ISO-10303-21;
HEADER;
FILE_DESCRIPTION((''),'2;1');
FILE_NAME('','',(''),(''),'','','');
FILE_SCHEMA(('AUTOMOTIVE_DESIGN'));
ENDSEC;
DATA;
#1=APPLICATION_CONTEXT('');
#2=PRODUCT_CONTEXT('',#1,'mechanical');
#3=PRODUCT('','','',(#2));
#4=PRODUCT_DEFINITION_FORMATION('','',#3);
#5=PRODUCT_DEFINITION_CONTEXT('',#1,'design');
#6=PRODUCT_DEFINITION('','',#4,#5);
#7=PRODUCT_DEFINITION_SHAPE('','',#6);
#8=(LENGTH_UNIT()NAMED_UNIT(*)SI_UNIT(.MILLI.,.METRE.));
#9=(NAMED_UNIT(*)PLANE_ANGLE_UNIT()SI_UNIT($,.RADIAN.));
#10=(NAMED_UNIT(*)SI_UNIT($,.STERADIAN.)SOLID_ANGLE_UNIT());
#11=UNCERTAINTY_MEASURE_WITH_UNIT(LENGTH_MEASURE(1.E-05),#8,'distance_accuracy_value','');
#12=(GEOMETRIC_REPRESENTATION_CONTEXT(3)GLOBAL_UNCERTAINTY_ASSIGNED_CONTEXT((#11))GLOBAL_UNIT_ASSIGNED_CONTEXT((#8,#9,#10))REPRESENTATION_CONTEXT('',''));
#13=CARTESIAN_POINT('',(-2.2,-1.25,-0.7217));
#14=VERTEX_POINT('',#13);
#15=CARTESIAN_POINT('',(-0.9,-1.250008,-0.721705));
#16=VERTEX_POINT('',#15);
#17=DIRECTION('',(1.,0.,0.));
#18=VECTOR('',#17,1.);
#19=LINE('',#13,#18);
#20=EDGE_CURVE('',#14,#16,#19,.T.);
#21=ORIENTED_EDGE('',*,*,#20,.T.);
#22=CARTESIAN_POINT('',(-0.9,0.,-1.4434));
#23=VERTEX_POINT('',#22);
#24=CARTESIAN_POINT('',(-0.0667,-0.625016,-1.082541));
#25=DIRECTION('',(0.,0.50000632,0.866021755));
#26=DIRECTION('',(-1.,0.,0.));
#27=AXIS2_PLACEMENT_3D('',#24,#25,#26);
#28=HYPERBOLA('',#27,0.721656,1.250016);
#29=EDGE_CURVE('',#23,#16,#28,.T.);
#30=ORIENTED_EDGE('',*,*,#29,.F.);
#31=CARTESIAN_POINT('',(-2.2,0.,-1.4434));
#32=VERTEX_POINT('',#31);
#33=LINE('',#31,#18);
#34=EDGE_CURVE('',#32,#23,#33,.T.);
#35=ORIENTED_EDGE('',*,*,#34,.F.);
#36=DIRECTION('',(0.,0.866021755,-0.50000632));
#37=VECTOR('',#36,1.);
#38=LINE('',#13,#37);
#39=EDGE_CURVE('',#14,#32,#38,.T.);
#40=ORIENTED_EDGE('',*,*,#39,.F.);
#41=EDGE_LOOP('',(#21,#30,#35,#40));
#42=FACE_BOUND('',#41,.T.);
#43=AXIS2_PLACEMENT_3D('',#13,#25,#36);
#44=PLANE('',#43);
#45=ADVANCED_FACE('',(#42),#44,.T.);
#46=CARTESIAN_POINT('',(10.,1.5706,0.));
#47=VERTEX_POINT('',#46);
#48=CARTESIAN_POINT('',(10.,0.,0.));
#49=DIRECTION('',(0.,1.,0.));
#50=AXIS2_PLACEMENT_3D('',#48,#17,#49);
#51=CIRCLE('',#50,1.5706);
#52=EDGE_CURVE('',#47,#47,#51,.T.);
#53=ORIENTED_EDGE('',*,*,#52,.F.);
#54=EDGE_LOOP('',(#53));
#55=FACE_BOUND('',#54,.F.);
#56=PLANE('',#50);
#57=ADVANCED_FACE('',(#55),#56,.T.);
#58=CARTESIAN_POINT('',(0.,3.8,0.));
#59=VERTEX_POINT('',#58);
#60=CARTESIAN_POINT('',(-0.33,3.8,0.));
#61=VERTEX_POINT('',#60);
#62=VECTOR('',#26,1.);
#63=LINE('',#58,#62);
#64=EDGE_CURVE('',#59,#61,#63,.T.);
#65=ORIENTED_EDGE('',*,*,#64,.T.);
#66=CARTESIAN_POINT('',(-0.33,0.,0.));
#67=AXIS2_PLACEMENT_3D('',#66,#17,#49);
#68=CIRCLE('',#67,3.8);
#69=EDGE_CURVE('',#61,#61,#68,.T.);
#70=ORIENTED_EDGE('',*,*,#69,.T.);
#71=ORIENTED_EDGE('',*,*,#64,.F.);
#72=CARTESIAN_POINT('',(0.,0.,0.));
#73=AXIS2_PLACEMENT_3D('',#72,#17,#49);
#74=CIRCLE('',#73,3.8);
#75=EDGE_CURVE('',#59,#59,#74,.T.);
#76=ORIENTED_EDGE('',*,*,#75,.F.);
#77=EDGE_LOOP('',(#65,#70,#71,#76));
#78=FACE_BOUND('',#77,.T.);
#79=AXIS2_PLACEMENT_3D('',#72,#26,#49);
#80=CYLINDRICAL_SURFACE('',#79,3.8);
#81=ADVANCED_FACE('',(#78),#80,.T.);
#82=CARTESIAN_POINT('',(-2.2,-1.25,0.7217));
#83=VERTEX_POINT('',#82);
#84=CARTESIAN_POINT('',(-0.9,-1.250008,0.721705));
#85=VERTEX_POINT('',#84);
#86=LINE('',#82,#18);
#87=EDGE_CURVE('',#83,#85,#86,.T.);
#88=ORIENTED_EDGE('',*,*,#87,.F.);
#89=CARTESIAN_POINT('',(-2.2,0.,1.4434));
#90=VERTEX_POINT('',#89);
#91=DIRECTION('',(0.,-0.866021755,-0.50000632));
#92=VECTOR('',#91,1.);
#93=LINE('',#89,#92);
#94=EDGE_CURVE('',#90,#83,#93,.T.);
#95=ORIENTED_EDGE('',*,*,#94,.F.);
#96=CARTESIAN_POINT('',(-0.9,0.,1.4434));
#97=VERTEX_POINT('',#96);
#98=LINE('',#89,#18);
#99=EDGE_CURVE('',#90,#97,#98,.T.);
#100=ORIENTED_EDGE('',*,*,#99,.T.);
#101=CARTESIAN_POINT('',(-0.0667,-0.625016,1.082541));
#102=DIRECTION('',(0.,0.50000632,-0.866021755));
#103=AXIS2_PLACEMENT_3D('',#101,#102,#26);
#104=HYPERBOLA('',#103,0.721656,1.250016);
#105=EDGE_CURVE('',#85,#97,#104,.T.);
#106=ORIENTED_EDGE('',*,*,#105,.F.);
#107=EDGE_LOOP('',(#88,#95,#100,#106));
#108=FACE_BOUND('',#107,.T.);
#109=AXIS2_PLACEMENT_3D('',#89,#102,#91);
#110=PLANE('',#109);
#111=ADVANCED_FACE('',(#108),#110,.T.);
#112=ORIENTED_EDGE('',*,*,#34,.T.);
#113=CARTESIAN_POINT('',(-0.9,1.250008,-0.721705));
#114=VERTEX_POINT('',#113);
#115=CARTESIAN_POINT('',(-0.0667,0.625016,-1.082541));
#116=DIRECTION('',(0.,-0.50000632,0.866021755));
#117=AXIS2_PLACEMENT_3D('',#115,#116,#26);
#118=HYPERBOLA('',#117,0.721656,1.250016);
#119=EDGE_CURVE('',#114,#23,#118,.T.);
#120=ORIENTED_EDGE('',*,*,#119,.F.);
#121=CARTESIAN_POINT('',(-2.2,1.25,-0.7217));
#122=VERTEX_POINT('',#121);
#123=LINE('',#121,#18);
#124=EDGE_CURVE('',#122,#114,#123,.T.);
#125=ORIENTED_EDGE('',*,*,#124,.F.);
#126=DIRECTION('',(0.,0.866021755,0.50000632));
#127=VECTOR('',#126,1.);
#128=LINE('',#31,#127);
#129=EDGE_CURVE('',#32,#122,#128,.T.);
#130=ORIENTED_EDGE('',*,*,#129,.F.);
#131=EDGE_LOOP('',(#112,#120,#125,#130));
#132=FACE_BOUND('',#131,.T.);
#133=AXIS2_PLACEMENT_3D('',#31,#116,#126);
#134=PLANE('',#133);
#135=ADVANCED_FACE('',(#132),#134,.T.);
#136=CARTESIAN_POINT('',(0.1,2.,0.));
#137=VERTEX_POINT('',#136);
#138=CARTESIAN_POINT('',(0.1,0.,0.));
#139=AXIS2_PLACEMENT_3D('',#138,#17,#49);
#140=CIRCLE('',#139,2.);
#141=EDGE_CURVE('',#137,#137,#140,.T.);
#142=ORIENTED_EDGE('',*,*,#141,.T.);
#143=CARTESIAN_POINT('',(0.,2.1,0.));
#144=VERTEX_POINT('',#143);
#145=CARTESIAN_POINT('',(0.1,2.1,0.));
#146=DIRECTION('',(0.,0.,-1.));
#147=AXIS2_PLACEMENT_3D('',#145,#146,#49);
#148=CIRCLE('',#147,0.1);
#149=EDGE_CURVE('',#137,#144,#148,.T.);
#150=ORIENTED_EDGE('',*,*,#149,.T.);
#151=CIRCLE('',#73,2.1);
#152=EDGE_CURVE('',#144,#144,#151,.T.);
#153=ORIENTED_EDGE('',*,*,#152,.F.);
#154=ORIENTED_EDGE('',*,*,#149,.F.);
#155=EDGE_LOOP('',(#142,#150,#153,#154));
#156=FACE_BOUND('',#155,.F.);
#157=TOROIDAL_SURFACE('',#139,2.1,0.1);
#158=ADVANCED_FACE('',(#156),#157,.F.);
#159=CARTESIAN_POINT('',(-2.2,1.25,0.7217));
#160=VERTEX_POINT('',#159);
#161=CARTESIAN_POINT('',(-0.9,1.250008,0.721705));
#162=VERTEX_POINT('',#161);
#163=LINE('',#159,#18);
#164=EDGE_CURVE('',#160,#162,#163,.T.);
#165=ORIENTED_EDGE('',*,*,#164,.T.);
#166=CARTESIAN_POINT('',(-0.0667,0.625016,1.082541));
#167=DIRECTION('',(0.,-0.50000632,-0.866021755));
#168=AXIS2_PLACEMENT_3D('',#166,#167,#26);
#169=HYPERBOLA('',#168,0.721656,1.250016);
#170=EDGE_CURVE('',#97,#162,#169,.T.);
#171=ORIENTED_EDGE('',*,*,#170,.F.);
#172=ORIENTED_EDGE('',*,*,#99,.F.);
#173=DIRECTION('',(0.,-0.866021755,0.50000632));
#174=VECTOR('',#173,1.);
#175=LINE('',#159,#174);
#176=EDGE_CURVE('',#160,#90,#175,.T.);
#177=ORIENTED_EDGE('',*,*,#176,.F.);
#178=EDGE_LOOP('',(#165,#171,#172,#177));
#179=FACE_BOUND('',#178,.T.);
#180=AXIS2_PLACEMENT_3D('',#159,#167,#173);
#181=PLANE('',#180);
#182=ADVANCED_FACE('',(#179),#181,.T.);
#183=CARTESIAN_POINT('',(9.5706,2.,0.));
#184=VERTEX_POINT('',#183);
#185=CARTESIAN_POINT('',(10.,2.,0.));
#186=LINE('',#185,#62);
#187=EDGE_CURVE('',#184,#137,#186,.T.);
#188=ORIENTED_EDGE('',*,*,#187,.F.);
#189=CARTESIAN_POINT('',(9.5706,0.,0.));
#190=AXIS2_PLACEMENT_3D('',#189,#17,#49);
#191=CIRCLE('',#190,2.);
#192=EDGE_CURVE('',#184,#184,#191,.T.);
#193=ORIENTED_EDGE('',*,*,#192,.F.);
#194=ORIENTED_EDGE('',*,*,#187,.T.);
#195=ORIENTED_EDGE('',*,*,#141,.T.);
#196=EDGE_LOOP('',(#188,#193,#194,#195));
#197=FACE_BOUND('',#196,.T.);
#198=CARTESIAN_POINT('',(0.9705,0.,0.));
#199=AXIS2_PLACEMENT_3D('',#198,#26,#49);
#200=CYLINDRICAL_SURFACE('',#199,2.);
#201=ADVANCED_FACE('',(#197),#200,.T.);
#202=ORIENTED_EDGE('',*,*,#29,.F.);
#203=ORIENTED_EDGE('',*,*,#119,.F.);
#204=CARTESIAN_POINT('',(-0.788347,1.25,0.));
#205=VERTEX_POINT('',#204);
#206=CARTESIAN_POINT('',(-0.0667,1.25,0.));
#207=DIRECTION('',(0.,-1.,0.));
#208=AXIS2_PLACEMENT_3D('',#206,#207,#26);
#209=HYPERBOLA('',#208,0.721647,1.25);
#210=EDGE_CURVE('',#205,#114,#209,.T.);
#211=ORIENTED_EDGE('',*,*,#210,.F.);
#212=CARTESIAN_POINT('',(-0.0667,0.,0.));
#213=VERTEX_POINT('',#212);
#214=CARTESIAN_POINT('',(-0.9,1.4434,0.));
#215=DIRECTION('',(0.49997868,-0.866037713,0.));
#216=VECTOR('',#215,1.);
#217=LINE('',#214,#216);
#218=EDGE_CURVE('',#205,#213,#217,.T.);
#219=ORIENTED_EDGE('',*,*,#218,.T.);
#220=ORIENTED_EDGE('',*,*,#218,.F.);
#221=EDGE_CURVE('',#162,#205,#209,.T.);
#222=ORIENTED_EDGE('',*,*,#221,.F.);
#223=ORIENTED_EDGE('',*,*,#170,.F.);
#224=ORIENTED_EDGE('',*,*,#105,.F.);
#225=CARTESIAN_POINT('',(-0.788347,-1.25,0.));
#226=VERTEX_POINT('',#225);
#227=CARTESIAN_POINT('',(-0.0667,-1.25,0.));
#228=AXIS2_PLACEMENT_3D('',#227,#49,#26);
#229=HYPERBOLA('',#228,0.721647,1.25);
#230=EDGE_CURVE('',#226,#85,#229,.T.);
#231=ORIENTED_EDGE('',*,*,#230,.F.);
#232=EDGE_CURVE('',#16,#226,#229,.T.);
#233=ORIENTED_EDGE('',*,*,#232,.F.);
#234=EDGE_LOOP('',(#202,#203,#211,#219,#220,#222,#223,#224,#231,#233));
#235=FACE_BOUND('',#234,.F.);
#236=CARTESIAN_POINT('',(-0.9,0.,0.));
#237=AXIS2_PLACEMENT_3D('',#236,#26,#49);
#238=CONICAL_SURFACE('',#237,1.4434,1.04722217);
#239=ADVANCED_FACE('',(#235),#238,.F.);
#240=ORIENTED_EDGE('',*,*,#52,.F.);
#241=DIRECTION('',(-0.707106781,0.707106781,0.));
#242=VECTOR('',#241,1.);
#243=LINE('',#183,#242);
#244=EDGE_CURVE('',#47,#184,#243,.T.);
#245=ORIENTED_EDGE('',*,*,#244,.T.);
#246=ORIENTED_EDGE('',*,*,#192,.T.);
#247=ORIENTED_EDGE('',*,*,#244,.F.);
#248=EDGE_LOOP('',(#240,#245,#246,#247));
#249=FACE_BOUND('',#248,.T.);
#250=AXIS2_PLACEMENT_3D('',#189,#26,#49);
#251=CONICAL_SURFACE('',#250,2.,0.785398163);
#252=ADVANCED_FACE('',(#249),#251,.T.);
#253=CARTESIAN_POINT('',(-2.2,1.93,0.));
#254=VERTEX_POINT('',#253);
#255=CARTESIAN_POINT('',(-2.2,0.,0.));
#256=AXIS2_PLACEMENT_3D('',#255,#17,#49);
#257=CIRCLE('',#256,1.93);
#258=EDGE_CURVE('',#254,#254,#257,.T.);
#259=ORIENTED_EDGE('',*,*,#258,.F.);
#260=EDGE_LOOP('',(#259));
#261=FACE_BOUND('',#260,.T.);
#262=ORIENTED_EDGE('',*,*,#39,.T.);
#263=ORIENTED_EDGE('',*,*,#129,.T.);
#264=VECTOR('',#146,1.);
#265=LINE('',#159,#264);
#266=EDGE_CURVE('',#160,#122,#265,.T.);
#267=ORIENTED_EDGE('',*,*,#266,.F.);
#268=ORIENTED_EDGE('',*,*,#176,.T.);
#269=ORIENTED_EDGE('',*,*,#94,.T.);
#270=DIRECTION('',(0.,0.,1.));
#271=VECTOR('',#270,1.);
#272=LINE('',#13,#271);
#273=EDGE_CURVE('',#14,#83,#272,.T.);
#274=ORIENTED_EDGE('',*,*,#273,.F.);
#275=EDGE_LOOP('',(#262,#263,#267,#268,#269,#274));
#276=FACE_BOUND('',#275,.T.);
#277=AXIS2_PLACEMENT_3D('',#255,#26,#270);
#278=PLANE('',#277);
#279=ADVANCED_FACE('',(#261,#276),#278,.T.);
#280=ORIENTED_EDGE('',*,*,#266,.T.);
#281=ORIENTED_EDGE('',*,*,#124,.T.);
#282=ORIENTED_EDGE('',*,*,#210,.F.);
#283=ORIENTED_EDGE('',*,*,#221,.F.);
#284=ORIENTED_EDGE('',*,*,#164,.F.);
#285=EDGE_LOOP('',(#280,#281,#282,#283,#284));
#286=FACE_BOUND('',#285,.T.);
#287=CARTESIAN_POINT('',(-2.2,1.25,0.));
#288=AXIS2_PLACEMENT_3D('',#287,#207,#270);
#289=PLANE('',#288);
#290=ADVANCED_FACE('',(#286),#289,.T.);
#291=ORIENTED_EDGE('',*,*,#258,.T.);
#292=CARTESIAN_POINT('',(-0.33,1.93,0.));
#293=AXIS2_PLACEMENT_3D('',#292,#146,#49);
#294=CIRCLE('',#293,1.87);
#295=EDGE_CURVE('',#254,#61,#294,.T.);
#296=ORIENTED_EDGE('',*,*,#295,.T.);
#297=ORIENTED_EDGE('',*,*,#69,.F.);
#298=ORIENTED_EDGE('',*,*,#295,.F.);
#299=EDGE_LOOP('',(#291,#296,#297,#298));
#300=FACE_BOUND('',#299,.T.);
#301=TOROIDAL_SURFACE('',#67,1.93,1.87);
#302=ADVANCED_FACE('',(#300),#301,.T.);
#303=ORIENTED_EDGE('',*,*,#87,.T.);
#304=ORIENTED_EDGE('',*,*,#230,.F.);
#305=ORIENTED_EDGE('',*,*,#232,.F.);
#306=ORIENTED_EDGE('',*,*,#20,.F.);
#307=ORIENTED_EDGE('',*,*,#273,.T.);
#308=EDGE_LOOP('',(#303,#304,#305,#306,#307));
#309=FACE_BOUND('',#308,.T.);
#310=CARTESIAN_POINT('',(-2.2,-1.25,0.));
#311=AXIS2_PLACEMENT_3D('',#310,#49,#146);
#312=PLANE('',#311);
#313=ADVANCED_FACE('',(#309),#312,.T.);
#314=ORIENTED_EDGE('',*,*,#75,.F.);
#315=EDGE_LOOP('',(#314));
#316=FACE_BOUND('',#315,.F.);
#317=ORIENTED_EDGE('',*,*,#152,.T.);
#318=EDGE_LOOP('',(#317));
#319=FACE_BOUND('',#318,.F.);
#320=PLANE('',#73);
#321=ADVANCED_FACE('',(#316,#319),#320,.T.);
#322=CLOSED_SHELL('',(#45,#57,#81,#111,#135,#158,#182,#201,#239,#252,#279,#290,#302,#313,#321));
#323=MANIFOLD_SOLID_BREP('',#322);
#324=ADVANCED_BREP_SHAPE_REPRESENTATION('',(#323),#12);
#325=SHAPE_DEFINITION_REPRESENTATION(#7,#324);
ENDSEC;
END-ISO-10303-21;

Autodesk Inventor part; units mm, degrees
ref_plane "YZ Plane" through (0, 0, 0) normal (1, 0, 0) x (0, 1, 0)
ref_plane "XZ Plane" through (0, 0, 0) normal (0, 1, 0) x (-1, 0, 0)
sketch "Эскиз1" plane through (0, 0, 0) normal (0, 0, 1) x (1, 0, 0)
  line L0 (-0.0667, 0) -> (10, 0)
  line L1 (10, 0) -> (10, 2)
  line L2 (10, 2) -> (1.4, 2)
  line L3 (1.4, 2) -> (0.9705, 2)
  line L4 (0.9705, 2) -> (0, 2)
  line L5 (0, 2) -> (0, 3.8)
  line L6 (0, 3.8) -> (-2.2, 3.8)
  line L7 (-2.2, 3.8) -> (-2.2, 1.4434)
  line L8 (-2.2, 1.4434) -> (-0.9, 1.4434)
  line L9 (-0.9, 1.4434) -> (-0.0667, 0)
  line L10 (-4.64, 0) -> (12.44, 0) projected
  line L11 (0, -0.76) -> (0, 4.56) projected
  line L12 (1.4, 2) -> (0, 2) construction
  dimension "d1" = 8.6
  dimension "d2" = 0.4295
  dimension "d3" = 2.2
  dimension "d4" = 1.3
  dimension "d5" = 60
  dimension "d6" = 4
  dimension "d7" = 4
  dimension "d8" = 2.8868
  dimension "d9" = 7.6
  dimension "d26" = 10
revolve "Базовый элемент" add sketch "Эскиз1" angle 360 about axis through (-0.0667, 0, 0) along (1, 0, 0)
sketch "Эскиз2" plane through (-2.2, 0, 0) normal (-1, 0, 0) x (0, 0, 1)
  circle A0 centre (0, 0) radius 1.4434 projected
  line L0 (0, -5.32) -> (0, 5.32) projected
  line L1 (-5.32, 0) -> (5.32, 0) projected
  line L2 (1.4434, 0) -> (0.7217, -1.25)
  line L3 (0.7217, -1.25) -> (-0.7217, -1.25)
  line L4 (-0.7217, -1.25) -> (-1.4434, 0)
  line L5 (-1.4434, 0) -> (-0.7217, 1.25)
  line L6 (-0.7217, 1.25) -> (0.7217, 1.25)
  line L7 (0.7217, 1.25) -> (1.4434, 0)
extrude "Паз" add sketch "Эскиз2" against normal up to next contours L7 A0 | A0 L2 | L6 L0 A0 | A0 L0 L3 | L0 L6 A0 | A0 L3 L0 | L4 A0 | A0 L5
fillet "Сопряжение1" radius 1.87 1 edges at (-2.2, -3.8, 0)
thread "Резьба" size "M4x0.7" class "6g" standard "ISO Metric profile" length 8.6
chamfer "Фаска1" distance 0.4294 distance2 0.4294 1 edges at (10, -2, 0) measured on face at (10, 0.556, 0.0273)
ref_plane "Work Plane1" through (29, 0, 0) normal (0, -1, 0) x (1, 0, 0)
fillet "Fillet2" radius 0.1 1 edges at (0, -2, 0)
equation "\"d1\" = GEL"
equation "\"d3\" = KOH"
equation "\"d4\" = INTI"
equation "\"d6\" = GD"
equation "\"d7\" = BDM"
equation "\"d8\" = 1.1547 * SW"
equation "\"d9\" = KOD"
equation "\"d26\" = NLG"
equation "\"d30\" = R"
equation "\"d17\" = RR"
equation "\"d13\" = GEL"
equation "\"d15\" = -0.5 * SPD + 0.5 * GD"
equation "\"d16\" = GUL"
equation "\"GD\" = NND"
equation "\"NLG\" = 10"
equation "\"GEL\" = 8.6"
equation "\"KOD\" = 7.6"
equation "\"KOH\" = 2.2"
equation "\"INTI\" = 1.3"
equation "\"GAL\" = 0.61345 * PTC"
equation "\"GUL\" = 0.61345 * PTC"
equation "\"BDM\" = NND"
equation "\"SW\" = 2.5"
equation "\"RR\" = 1.87"
equation "\"SPD\" = 3.14117"
equation "\"R\" = 0.1"
equation "\"TOA\" = 30deg"
equation "\"GD1\" = THREADDIA - 1.2269 * PTC"
equation "\"THREADDIA\" = 4"
equation "\"PTC\" = 0.7"
equation "\"NND\" = 4"
equation "\"E0\" = 2.87"
properties part number "JIS B 1174 - M4 x 10" material "Сталь, мягкая"
